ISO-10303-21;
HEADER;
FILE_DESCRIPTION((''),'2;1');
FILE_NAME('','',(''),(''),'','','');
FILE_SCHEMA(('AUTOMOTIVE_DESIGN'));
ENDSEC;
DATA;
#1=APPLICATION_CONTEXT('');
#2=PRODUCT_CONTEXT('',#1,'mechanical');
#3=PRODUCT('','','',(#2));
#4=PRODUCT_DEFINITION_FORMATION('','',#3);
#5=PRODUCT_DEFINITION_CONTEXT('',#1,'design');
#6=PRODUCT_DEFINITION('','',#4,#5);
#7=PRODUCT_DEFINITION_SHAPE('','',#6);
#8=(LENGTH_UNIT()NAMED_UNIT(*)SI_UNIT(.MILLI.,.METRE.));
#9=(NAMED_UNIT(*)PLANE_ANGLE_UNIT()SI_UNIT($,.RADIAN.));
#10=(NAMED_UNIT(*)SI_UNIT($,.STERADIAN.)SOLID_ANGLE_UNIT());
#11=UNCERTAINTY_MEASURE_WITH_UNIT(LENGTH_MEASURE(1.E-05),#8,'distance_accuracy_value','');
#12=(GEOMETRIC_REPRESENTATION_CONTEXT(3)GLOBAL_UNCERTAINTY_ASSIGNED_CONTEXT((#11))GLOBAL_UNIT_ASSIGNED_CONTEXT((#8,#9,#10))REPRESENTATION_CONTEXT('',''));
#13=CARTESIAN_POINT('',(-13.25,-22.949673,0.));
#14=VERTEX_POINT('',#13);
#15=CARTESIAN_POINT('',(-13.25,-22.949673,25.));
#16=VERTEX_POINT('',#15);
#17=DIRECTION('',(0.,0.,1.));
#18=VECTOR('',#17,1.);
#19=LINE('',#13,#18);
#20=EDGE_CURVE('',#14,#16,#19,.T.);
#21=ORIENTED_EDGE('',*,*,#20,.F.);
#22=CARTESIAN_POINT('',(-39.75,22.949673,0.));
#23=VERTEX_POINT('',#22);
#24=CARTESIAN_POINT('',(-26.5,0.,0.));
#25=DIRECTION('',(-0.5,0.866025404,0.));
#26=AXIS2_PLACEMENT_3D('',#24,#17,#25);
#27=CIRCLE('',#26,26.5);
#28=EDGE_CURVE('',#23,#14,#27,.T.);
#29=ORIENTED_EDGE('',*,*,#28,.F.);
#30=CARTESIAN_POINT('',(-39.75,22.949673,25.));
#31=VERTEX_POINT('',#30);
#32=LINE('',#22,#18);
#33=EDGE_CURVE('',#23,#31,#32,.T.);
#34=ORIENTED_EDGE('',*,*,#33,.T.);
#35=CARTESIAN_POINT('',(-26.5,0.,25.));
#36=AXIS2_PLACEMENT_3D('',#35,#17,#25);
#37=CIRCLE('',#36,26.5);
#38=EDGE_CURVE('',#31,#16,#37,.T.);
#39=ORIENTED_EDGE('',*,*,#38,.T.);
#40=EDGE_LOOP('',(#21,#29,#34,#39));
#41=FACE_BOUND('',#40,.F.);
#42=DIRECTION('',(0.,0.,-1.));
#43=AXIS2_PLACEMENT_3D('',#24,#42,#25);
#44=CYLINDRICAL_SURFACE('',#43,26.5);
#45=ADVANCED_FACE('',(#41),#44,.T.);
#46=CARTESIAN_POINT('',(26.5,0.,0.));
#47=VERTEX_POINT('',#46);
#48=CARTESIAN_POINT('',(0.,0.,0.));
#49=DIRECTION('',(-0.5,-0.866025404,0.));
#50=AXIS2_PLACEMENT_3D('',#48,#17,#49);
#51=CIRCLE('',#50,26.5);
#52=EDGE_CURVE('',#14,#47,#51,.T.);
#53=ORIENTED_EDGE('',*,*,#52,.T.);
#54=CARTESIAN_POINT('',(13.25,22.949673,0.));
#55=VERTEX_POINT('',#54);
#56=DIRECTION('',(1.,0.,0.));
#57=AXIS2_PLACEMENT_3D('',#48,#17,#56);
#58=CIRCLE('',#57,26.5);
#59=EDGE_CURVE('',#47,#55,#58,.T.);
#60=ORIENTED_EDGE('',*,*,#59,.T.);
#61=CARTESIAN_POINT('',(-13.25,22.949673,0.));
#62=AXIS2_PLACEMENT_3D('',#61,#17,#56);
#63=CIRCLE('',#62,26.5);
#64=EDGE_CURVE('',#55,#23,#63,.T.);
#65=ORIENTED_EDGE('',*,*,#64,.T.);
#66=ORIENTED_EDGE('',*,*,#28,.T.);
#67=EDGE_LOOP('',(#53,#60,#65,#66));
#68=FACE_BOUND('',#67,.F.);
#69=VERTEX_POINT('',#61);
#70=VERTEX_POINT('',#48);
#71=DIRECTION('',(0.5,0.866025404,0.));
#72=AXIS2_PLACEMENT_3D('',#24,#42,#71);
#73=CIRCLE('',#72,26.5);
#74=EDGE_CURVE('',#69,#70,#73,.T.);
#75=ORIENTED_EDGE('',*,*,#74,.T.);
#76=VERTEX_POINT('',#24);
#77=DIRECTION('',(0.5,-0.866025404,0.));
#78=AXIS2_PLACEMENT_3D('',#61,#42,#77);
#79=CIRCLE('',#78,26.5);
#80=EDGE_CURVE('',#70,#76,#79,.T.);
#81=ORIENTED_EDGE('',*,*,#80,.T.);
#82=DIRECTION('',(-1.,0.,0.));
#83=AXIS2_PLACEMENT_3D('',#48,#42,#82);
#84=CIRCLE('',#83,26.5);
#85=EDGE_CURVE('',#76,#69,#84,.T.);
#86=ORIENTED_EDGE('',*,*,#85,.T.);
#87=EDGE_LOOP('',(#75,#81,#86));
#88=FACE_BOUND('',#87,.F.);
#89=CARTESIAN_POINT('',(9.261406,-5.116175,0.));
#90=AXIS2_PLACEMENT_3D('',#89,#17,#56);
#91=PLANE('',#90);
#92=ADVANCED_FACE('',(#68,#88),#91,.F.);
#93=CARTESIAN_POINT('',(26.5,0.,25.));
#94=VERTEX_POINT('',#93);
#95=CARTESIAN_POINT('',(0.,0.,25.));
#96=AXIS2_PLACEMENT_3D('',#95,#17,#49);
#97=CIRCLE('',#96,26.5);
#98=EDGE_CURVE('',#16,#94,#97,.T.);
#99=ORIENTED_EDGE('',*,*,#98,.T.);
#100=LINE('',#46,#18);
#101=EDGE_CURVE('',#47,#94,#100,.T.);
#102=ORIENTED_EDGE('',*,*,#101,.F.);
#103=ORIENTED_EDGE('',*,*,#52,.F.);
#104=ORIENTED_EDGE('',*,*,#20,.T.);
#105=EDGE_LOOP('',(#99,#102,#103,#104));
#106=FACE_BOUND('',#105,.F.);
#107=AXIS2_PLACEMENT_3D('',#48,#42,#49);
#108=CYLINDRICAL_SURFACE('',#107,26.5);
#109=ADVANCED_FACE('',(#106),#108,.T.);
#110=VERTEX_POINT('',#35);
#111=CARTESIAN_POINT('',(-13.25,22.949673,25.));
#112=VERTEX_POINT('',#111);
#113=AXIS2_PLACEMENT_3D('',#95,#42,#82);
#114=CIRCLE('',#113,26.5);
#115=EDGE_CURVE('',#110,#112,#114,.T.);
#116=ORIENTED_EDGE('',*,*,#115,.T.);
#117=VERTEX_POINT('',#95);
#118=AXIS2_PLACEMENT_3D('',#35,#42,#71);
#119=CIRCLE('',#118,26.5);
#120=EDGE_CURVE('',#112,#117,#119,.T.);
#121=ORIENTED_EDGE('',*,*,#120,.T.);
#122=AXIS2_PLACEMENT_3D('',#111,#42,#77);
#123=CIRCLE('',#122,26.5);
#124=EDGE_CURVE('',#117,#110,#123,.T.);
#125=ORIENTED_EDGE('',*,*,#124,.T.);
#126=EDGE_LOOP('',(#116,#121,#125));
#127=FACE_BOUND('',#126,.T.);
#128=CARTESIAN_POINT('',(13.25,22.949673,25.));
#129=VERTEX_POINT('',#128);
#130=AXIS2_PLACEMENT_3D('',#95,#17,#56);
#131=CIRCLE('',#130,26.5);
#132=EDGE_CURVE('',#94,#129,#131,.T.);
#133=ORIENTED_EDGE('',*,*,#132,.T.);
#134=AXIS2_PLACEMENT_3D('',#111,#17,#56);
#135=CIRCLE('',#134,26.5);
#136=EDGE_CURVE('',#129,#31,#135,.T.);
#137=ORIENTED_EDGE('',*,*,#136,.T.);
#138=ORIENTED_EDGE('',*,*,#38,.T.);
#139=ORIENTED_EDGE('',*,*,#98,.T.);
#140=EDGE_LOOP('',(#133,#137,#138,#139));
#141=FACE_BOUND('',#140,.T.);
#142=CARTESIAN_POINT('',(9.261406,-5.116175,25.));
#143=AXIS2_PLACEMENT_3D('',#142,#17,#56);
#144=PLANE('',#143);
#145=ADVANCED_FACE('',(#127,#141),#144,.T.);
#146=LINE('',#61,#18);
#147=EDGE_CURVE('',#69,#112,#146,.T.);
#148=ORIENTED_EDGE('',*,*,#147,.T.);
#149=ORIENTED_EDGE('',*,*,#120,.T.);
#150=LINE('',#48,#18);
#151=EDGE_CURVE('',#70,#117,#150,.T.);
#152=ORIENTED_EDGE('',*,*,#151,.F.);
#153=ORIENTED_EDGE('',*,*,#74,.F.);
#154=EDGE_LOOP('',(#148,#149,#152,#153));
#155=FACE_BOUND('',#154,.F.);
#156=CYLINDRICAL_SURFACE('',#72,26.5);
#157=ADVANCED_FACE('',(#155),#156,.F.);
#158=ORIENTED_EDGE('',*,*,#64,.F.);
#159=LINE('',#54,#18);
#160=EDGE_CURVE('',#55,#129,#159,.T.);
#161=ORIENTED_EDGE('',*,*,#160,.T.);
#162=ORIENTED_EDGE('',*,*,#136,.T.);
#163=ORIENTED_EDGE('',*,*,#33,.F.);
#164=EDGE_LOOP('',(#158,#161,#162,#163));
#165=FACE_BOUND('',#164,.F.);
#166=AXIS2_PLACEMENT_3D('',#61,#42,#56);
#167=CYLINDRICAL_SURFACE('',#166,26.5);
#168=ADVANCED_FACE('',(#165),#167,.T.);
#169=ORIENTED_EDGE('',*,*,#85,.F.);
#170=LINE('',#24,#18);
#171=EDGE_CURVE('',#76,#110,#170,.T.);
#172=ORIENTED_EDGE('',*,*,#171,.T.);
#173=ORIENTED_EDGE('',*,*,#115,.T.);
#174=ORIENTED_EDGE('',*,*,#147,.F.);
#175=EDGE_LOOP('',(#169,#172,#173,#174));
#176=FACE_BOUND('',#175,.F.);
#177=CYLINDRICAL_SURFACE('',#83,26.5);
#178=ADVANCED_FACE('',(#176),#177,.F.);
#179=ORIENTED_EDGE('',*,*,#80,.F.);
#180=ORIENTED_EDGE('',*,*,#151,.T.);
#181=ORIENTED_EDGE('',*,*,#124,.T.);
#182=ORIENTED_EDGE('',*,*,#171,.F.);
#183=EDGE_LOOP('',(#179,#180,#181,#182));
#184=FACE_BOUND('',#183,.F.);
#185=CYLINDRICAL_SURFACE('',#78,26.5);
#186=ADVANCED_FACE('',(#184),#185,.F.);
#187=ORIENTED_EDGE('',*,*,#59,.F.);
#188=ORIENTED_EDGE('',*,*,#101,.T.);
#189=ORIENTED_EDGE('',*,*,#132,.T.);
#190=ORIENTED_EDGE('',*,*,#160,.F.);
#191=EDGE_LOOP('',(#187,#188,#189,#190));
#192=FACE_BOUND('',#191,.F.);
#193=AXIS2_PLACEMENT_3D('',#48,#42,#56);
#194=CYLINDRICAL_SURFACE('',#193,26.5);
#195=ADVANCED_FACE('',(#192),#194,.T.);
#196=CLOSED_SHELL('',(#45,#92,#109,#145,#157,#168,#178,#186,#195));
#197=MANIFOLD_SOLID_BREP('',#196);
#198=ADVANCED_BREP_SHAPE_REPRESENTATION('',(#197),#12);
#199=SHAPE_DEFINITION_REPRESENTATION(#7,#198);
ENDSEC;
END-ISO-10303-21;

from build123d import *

# Parameters (mm, degrees)
F1_DEPTH = 25


with BuildPart() as f1:
    # F0 (on Top) → F1 (new body)
    with BuildSketch(Plane.XY):
        with BuildLine():
            ThreePointArc((-13.25, -22.9496732003), (13.25, -22.9496732003), (26.5, 0))
            ThreePointArc((26.5, 0), (22.9496732003, 13.25), (13.25, 22.9496732003))
            ThreePointArc((13.25, 22.9496732003), (9.6996732003, 9.6996732003), (0, 0))
            ThreePointArc((0, 0), (-3.5503267997, -13.25), (-13.25, -22.9496732003))
        make_face()
        with BuildLine():
            ThreePointArc((0, 0), (9.6996732003, 9.6996732003), (13.25, 22.9496732003))
            ThreePointArc((13.25, 22.9496732003), (0, 26.5), (-13.25, 22.9496732003))
            ThreePointArc((-13.25, 22.9496732003), (-3.5503267997, 13.25), (0, 0))
        make_face()
        with BuildLine():
            ThreePointArc((-13.25, 22.9496732003), (0, 26.5), (13.25, 22.9496732003))
            ThreePointArc((13.25, 22.9496732003), (-13.25, 49.4496732003), (-39.75, 22.9496732003))
            ThreePointArc((-39.75, 22.9496732003), (-26.5, 26.5), (-13.25, 22.9496732003))
        make_face()
        with BuildLine():
            ThreePointArc((-39.75, 22.9496732003), (-49.4496732003, -13.25), (-13.25, -22.9496732003))
            ThreePointArc((-13.25, -22.9496732003), (-22.9496732003, -13.25), (-26.5, 0))
            ThreePointArc((-26.5, 0), (-36.1996732003, 9.6996732003), (-39.75, 22.9496732003))
        make_face()
        with BuildLine():
            ThreePointArc((-26.5, 0), (-22.9496732003, -13.25), (-13.25, -22.9496732003))
            ThreePointArc((-13.25, -22.9496732003), (-3.5503267997, -13.25), (0, 0))
            ThreePointArc((0, 0), (-13.25, -3.5503267997), (-26.5, 0))
        make_face()
        with BuildLine():
            ThreePointArc((-26.5, 0), (-22.9496732003, 13.25), (-13.25, 22.9496732003))
            ThreePointArc((-13.25, 22.9496732003), (-26.5, 26.5), (-39.75, 22.9496732003))
            ThreePointArc((-39.75, 22.9496732003), (-36.1996732003, 9.6996732003), (-26.5, 0))
        make_face()
    extrude(amount=F1_DEPTH)


solid = f1.part
